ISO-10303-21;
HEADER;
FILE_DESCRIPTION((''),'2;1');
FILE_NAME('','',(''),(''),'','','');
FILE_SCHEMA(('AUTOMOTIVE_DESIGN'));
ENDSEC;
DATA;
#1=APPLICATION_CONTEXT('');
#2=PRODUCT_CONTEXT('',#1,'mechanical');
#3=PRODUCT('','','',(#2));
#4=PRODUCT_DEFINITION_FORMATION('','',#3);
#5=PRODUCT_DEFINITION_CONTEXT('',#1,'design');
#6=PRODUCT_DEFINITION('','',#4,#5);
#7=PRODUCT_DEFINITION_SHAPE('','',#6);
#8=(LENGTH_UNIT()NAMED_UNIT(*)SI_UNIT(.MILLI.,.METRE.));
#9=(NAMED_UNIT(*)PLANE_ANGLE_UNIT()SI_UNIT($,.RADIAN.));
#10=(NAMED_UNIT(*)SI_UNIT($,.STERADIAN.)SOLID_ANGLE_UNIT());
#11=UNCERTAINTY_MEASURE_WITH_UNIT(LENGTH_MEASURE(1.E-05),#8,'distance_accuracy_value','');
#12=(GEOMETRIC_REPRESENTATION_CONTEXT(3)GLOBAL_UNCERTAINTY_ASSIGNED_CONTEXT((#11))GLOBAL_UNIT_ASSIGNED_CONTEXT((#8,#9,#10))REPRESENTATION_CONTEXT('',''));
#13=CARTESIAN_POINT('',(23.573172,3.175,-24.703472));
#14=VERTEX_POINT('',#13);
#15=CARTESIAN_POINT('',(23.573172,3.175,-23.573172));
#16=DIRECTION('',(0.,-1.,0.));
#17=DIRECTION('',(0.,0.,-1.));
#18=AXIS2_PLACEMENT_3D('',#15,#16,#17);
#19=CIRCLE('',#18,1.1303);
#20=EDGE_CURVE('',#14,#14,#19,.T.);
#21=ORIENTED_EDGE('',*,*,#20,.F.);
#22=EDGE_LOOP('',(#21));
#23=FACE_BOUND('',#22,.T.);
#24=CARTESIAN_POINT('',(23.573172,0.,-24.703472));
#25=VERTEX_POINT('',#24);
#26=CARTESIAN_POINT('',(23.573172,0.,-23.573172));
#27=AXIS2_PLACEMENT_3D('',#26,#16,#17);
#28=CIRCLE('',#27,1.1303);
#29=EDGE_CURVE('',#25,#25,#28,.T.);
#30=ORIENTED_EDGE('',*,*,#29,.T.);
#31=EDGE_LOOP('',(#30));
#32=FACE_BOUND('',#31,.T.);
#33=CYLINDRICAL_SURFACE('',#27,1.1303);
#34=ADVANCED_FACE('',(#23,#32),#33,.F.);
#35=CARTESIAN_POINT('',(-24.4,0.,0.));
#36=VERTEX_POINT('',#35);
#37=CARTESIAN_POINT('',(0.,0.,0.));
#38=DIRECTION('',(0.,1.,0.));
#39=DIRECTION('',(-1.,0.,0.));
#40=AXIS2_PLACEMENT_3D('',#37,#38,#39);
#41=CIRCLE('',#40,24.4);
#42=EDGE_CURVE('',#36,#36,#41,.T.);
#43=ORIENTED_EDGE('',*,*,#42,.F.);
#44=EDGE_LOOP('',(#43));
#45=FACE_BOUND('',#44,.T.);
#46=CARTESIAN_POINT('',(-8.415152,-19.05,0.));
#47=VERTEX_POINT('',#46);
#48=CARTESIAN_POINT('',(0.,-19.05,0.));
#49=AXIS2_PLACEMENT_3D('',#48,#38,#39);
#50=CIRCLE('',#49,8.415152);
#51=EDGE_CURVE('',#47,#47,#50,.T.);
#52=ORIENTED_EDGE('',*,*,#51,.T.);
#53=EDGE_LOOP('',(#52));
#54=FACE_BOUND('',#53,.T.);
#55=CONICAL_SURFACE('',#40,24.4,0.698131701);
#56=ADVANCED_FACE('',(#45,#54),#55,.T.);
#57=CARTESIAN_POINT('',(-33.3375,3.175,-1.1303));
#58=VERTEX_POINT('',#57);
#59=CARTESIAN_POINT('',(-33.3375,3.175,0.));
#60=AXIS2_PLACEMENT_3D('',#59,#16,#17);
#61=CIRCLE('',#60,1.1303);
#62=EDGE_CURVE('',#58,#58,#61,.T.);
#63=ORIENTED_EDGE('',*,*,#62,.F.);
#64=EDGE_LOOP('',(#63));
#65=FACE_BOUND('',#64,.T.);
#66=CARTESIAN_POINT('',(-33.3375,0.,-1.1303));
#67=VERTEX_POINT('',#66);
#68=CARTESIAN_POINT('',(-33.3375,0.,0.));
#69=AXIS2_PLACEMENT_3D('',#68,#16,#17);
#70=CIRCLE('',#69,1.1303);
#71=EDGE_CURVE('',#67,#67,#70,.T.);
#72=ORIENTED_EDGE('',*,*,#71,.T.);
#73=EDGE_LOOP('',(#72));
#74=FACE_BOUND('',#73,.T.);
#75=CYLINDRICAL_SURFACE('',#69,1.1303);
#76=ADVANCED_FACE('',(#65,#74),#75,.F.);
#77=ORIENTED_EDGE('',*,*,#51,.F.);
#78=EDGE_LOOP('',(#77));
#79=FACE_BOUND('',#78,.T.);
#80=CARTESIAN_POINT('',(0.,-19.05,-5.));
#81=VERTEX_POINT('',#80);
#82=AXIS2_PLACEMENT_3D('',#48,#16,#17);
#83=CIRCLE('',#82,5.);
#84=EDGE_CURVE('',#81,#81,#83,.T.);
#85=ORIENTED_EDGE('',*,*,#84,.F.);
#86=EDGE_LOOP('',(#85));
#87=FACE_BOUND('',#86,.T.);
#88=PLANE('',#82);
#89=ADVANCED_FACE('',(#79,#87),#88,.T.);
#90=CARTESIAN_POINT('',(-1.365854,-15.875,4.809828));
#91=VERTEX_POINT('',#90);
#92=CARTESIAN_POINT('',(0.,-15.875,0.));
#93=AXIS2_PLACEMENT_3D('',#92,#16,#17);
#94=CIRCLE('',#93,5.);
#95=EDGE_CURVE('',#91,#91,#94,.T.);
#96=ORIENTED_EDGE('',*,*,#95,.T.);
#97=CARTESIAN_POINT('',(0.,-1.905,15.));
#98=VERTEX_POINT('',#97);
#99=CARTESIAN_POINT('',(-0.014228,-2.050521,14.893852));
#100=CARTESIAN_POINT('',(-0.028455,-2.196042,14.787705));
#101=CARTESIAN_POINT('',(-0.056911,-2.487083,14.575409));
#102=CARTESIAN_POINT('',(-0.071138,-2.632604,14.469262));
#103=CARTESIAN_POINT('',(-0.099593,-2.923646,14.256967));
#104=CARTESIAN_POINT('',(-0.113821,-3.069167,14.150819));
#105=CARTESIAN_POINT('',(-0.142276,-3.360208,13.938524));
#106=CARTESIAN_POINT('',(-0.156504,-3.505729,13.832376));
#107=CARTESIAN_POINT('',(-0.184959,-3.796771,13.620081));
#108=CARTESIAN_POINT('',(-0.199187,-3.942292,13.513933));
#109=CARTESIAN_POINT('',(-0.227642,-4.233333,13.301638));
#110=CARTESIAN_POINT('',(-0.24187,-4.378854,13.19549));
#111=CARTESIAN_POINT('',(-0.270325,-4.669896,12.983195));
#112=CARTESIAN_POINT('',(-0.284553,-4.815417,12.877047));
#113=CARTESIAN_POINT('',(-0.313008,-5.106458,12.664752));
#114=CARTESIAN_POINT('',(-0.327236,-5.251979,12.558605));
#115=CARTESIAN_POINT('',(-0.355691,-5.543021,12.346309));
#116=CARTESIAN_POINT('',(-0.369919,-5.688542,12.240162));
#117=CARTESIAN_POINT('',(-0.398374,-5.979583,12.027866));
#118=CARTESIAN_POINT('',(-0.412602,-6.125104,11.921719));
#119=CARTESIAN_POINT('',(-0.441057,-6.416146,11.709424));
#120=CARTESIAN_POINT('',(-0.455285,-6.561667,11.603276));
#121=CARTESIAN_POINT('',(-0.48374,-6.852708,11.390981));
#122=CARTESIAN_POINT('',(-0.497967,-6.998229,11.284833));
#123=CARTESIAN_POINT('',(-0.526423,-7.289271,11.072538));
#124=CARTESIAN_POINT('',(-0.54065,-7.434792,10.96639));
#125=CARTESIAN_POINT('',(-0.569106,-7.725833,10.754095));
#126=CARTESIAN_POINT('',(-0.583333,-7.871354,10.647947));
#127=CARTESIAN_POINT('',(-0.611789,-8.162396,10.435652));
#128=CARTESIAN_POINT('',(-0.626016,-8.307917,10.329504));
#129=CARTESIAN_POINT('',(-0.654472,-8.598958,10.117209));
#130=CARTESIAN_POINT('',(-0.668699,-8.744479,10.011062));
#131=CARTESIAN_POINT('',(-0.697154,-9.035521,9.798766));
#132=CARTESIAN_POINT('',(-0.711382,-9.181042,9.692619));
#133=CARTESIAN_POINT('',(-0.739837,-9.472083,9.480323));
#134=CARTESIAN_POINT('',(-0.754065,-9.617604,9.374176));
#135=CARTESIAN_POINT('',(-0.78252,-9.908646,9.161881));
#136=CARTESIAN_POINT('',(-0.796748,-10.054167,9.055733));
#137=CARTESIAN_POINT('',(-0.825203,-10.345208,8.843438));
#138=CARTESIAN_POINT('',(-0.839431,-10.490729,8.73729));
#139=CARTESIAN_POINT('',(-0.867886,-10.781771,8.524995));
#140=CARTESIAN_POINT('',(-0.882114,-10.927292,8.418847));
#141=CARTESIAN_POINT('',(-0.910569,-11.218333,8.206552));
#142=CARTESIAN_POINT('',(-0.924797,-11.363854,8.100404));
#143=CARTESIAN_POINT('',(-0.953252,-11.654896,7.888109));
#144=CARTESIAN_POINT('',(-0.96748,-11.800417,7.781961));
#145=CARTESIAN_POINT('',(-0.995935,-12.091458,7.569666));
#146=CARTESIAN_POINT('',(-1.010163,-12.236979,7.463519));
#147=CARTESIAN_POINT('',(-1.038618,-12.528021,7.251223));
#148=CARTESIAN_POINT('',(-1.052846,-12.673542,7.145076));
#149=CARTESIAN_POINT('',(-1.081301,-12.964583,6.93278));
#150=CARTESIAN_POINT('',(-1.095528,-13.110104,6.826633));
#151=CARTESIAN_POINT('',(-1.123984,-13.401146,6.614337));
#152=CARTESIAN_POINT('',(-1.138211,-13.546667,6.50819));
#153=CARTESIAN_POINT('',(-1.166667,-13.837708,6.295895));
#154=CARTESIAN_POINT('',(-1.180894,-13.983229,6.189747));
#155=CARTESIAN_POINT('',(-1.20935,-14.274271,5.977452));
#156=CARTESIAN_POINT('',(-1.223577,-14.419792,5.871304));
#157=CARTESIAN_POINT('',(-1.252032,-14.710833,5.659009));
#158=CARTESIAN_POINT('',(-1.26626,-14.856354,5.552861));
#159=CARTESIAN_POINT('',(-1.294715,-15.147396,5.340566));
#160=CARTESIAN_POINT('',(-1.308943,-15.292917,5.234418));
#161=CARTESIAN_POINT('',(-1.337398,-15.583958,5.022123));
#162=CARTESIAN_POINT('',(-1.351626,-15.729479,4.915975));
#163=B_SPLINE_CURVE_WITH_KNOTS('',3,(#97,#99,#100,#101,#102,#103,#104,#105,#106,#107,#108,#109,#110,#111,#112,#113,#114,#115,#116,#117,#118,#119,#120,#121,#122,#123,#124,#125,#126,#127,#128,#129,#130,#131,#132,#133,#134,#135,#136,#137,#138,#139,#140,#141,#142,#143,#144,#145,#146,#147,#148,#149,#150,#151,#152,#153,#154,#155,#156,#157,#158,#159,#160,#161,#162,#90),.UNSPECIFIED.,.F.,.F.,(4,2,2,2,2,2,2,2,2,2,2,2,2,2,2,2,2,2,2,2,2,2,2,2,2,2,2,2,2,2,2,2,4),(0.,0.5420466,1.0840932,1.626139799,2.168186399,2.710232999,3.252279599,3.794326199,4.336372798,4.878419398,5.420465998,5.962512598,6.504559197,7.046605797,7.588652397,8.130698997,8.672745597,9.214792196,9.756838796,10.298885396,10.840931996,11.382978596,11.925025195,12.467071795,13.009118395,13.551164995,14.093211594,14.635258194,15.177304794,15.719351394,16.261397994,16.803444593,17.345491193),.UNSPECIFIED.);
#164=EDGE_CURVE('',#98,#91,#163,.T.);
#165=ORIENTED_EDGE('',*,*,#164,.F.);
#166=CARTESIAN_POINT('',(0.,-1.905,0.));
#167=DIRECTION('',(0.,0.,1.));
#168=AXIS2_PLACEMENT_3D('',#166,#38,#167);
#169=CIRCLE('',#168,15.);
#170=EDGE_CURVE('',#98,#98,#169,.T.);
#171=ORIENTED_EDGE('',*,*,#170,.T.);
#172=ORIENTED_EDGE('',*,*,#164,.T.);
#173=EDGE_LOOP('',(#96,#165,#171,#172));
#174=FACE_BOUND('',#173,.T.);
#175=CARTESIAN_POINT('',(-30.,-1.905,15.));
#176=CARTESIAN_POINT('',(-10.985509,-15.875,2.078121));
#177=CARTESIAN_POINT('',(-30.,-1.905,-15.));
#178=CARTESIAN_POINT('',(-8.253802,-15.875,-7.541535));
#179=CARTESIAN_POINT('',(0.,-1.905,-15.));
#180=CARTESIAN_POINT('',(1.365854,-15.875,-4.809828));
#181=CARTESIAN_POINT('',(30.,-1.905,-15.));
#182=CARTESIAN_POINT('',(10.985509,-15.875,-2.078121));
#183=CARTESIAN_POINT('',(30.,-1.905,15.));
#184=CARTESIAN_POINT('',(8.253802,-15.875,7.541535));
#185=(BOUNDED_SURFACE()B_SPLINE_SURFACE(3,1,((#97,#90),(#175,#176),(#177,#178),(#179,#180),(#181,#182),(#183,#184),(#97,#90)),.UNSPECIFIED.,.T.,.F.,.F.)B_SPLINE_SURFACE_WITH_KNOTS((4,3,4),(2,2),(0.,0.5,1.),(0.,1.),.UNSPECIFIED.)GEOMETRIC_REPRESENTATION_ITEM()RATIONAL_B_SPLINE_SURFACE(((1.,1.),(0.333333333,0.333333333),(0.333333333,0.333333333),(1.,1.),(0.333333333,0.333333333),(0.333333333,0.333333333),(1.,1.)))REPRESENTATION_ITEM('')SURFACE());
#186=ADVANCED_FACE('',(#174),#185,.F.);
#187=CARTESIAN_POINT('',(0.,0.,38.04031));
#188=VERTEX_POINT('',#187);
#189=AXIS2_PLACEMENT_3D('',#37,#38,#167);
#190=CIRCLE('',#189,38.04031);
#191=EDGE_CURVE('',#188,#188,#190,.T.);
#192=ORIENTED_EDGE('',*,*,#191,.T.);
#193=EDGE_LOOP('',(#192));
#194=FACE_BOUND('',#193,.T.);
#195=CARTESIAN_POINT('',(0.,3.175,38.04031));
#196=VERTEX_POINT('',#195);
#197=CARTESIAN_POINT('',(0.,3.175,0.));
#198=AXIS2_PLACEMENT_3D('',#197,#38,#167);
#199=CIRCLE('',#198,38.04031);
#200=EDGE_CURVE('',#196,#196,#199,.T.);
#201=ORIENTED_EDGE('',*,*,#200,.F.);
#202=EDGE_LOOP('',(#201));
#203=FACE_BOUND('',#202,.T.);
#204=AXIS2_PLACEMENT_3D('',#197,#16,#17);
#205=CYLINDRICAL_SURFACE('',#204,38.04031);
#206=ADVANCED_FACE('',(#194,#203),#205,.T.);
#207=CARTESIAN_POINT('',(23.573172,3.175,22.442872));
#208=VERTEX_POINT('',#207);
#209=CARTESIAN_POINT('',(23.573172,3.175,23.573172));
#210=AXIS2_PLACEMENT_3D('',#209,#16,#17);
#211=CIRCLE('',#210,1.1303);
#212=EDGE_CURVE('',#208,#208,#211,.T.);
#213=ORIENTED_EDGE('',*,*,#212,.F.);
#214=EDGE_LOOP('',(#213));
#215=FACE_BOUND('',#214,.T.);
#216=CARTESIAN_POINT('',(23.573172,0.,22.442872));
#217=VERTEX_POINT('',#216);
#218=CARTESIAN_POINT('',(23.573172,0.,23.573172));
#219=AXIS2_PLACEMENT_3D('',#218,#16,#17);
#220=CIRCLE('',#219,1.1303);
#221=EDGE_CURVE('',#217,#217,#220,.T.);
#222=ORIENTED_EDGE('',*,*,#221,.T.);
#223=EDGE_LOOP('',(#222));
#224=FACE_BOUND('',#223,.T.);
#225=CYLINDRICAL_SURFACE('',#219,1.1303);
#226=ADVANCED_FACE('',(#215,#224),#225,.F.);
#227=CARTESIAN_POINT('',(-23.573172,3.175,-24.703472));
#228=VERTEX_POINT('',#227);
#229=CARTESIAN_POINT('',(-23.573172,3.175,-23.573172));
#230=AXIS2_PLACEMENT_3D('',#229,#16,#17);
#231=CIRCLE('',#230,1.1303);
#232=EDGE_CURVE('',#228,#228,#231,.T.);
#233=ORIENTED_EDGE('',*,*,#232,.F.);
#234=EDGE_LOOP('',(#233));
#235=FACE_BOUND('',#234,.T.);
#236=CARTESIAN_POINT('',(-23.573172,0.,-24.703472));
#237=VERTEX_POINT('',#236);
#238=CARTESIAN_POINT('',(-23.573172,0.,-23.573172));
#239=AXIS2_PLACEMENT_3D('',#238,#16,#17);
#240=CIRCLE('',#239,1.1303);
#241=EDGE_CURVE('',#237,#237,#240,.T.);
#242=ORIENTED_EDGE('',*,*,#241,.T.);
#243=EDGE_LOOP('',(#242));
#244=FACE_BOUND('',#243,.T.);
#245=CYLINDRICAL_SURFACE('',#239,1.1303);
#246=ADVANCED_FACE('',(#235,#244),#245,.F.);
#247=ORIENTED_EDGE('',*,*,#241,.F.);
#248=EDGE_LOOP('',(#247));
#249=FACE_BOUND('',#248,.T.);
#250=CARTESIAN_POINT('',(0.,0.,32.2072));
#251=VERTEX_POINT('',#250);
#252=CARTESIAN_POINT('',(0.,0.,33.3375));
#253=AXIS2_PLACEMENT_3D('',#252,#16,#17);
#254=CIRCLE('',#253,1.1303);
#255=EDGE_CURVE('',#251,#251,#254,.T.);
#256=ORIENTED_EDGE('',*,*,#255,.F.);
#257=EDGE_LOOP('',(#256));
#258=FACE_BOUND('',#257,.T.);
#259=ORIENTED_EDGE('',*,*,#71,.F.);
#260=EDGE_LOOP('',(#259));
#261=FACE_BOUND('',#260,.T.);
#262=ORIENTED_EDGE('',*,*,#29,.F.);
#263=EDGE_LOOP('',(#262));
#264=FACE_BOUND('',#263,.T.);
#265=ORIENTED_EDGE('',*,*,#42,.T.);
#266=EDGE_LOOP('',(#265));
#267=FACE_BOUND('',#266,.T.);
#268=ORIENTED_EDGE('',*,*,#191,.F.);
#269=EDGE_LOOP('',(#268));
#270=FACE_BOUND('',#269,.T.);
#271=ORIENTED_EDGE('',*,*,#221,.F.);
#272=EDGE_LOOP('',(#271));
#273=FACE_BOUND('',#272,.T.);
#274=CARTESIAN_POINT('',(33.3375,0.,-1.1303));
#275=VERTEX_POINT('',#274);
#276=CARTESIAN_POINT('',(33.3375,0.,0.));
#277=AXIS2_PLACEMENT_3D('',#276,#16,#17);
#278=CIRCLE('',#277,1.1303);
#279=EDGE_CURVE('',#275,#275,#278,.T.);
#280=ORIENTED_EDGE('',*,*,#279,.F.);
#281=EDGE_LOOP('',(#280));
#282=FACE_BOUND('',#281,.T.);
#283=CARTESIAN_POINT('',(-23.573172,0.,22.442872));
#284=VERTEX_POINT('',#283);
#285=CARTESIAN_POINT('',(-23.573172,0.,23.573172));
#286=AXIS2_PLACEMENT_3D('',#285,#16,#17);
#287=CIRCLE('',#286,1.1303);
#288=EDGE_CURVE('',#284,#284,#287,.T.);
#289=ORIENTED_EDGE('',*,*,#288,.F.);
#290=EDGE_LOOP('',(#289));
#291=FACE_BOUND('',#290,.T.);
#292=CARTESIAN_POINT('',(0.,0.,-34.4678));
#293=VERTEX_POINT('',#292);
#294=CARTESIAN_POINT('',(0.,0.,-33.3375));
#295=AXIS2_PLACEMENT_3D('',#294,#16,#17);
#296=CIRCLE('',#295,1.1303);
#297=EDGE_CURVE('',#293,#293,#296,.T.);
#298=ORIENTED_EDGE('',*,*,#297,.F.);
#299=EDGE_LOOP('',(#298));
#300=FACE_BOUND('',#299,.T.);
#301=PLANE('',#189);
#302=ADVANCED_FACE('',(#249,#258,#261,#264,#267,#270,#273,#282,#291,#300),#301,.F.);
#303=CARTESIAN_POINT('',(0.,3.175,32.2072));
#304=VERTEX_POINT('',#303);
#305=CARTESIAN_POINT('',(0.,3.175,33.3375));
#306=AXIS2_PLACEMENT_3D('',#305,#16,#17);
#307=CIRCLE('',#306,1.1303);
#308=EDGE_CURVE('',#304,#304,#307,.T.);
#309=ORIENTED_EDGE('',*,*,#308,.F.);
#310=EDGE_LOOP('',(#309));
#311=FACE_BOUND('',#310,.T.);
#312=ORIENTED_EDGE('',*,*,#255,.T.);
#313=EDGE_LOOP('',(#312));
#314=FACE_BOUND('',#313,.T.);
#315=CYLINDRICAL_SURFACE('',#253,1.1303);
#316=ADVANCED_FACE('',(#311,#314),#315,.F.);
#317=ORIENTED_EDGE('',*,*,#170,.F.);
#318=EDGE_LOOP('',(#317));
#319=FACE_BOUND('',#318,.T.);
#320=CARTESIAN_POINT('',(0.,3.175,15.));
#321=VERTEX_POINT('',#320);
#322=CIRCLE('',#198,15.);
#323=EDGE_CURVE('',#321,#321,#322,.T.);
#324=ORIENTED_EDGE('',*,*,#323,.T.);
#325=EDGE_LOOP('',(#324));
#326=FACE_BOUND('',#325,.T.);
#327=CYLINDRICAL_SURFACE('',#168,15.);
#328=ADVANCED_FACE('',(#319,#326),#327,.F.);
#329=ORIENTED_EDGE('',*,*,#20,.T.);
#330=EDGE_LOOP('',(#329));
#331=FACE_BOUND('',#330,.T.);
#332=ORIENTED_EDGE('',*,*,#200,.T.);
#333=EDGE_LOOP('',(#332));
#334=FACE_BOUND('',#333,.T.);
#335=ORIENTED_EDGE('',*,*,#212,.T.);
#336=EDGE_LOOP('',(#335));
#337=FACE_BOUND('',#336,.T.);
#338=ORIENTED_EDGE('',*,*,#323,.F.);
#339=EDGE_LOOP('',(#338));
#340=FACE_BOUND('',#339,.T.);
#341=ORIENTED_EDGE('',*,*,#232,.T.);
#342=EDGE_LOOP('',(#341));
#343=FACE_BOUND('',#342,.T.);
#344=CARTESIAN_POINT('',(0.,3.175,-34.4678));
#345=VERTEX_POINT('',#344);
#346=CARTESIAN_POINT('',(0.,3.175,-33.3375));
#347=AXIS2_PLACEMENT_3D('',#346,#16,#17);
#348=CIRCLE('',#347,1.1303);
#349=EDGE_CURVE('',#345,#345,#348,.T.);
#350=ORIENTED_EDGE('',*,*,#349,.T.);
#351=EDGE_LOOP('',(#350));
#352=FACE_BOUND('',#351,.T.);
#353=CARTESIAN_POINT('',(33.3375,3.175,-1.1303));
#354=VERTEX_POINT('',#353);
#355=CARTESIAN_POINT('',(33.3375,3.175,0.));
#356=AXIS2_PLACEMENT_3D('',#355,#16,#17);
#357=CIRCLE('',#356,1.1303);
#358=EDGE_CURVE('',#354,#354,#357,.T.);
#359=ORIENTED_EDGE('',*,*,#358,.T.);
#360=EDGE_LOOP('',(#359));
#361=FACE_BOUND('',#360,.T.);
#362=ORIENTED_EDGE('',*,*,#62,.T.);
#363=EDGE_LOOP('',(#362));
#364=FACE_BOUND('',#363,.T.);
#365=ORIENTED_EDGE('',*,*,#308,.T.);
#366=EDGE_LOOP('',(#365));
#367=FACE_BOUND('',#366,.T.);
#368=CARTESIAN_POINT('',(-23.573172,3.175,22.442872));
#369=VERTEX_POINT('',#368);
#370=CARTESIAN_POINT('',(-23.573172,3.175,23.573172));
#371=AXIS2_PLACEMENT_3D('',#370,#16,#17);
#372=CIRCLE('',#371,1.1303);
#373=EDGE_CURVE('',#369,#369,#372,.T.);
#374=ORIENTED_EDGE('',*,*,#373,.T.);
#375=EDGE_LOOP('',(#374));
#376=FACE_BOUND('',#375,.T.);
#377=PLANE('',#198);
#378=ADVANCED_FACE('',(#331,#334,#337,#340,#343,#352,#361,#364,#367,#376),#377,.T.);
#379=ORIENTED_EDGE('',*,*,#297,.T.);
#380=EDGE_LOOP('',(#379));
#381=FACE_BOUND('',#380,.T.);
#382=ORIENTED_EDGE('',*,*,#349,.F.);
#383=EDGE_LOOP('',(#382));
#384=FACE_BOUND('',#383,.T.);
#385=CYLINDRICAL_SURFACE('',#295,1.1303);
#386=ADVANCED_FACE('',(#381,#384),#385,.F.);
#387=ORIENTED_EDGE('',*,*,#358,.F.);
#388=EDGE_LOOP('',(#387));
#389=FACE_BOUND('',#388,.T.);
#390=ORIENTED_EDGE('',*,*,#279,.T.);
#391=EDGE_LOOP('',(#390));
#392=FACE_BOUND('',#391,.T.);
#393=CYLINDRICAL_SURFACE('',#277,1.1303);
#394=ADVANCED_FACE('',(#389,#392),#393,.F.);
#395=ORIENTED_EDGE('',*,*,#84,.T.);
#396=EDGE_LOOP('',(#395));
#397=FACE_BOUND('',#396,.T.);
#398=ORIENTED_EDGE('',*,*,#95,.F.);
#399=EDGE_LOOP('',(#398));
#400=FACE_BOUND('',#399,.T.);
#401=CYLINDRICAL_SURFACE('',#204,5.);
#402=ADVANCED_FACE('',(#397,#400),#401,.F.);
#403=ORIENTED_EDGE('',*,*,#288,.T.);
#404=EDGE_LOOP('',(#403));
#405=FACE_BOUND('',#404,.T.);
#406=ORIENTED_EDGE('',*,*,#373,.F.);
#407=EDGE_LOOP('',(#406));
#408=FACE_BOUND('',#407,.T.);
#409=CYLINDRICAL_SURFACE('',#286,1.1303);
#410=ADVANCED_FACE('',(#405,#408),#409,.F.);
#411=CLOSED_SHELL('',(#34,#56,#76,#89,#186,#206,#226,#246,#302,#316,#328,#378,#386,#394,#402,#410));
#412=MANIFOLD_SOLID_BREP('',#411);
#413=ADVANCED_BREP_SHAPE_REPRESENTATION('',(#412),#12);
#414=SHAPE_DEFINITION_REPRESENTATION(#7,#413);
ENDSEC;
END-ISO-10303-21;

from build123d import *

# Parameters (mm, degrees)
SKETCH1_R                 = 38.04031
BOSS_EXTRUDE1_DEPTH       = 3.175
TAP_DRILL_FOR_4_40_TAP1_D = 2.2606
CIRPATTERN1_COUNT         = 8
SKETCH5_R                 = 25.4
BOSS_EXTRUDE2_DEPTH       = 19.05
CUT_EXTRUDE1_DEPTH        = 59.207224593
CUT_EXTRUDE1_DEPTH_BACK   = 59.207224593
SKETCH6_R                 = 5
SKETCH7_R                 = 15
CUT_EXTRUDE2_DEPTH        = 5.08


with BuildPart() as part:
    # Sketch1 → Boss-Extrude1 (new body)
    with BuildSketch(Plane(origin=(0, 0, 0), x_dir=(1, 0, 0), z_dir=(0, 1, 0))):
        with Locations(Location((0, 0, 0), (0, 0, 270))):
            Circle(SKETCH1_R)
    extrude(amount=BOSS_EXTRUDE1_DEPTH)

    # Tap Drill for #4-40 Tap1 (through all)
    with Locations(Plane(origin=(0, 0, 0), x_dir=(-1, 0, 0), z_dir=(0, -1, 0))):
        with Locations((0, -33.3375)):
            tap_drill_for_4_40_tap1 = Hole(TAP_DRILL_FOR_4_40_TAP1_D / 2)

    # CirPattern1: Tap Drill for #4-40 Tap1 ×8 about axis
    cirpattern1_axis = Axis((0, 0, 0), (0, 1, 0))
    for i in range(1, CIRPATTERN1_COUNT):
        add(tap_drill_for_4_40_tap1.rotate(cirpattern1_axis, i * 360 / CIRPATTERN1_COUNT), mode=Mode.SUBTRACT)

    # Sketch5 → Boss-Extrude2 (add)
    with BuildSketch(Plane.XZ):
        with Locations(Location((0, 0, 0), (0, 0, 90))):
            Circle(SKETCH5_R)
    extrude(amount=BOSS_EXTRUDE2_DEPTH)

    # Sketch6 → Cut-Extrude1 (cut, two sides: drawn at the far end of the back side and taken through both)
    with BuildSketch(Plane.XZ.offset(19.05).offset(-CUT_EXTRUDE1_DEPTH_BACK)):
        with Locations(Location((0, 0, 0), (0, 0, 270))):
            Circle(SKETCH6_R)
    extrude(amount=CUT_EXTRUDE1_DEPTH + CUT_EXTRUDE1_DEPTH_BACK, mode=Mode.SUBTRACT)

    # Sketch7 → Cut-Extrude2 (cut)
    with BuildSketch(Plane(origin=(0, 3.175, 0), x_dir=(1, 0, 0), z_dir=(0, 1, 0))):
        with Locations(Location((0, 0, 0), (0, 0, 270))):
            Circle(SKETCH7_R)
    extrude(amount=-CUT_EXTRUDE2_DEPTH, mode=Mode.SUBTRACT)

    # Cut-Loft1: read off the stored shape, not the designer's step
    # Cut-Loft1: loft between two sections, ruled curve by curve
    cut_loft1_from = [
        Edge.make_bspline([(0, -1.905, 15), (-30, -1.905, 15), (-30, -1.905, -15), (0, -1.905, -15), (30, -1.905, -15), (30, -1.905, 15), (0, -1.905, 15)], [0, 0, 0, 0, 0.5, 0.5, 0.5, 1, 1, 1, 1], 3, [1, 0.333333333, 0.333333333, 1, 0.333333333, 0.333333333, 1]),
    ]
    cut_loft1_to = [
        Edge.make_bspline([(-1.365853626, -15.875, 4.809827842), (-10.985509311, -15.875, 2.07812059), (-8.253802058, -15.875, -7.541535095), (1.365853626, -15.875, -4.809827842), (10.985509311, -15.875, -2.07812059), (8.253802058, -15.875, 7.541535095), (-1.365853626, -15.875, 4.809827842)], [0, 0, 0, 0, 0.5, 0.5, 0.5, 1, 1, 1, 1], 3, [1, 0.333333333, 0.333333333, 1, 0.333333333, 0.333333333, 1]),
    ]
    cut_loft1 = Solid(Shell([*[Face.make_surface_from_curves(cut_loft1_from[k], cut_loft1_to[k]) for k in range(1)], Face(Wire(cut_loft1_from)), Face(Wire(cut_loft1_to))]))
    add(cut_loft1, mode=Mode.SUBTRACT)

    # Sketch10 → Cut-Revolve1 (revolve, cut)
    with BuildSketch(Plane.XY):
        Polygon((-25.4, 0), (-24.4, 0), (-8.415152026, -19.05), (-25.4, -19.05), align=None)
    revolve(axis=Axis((0, 0, 0), (0, -1, 0)), mode=Mode.SUBTRACT)


solid = part.part
